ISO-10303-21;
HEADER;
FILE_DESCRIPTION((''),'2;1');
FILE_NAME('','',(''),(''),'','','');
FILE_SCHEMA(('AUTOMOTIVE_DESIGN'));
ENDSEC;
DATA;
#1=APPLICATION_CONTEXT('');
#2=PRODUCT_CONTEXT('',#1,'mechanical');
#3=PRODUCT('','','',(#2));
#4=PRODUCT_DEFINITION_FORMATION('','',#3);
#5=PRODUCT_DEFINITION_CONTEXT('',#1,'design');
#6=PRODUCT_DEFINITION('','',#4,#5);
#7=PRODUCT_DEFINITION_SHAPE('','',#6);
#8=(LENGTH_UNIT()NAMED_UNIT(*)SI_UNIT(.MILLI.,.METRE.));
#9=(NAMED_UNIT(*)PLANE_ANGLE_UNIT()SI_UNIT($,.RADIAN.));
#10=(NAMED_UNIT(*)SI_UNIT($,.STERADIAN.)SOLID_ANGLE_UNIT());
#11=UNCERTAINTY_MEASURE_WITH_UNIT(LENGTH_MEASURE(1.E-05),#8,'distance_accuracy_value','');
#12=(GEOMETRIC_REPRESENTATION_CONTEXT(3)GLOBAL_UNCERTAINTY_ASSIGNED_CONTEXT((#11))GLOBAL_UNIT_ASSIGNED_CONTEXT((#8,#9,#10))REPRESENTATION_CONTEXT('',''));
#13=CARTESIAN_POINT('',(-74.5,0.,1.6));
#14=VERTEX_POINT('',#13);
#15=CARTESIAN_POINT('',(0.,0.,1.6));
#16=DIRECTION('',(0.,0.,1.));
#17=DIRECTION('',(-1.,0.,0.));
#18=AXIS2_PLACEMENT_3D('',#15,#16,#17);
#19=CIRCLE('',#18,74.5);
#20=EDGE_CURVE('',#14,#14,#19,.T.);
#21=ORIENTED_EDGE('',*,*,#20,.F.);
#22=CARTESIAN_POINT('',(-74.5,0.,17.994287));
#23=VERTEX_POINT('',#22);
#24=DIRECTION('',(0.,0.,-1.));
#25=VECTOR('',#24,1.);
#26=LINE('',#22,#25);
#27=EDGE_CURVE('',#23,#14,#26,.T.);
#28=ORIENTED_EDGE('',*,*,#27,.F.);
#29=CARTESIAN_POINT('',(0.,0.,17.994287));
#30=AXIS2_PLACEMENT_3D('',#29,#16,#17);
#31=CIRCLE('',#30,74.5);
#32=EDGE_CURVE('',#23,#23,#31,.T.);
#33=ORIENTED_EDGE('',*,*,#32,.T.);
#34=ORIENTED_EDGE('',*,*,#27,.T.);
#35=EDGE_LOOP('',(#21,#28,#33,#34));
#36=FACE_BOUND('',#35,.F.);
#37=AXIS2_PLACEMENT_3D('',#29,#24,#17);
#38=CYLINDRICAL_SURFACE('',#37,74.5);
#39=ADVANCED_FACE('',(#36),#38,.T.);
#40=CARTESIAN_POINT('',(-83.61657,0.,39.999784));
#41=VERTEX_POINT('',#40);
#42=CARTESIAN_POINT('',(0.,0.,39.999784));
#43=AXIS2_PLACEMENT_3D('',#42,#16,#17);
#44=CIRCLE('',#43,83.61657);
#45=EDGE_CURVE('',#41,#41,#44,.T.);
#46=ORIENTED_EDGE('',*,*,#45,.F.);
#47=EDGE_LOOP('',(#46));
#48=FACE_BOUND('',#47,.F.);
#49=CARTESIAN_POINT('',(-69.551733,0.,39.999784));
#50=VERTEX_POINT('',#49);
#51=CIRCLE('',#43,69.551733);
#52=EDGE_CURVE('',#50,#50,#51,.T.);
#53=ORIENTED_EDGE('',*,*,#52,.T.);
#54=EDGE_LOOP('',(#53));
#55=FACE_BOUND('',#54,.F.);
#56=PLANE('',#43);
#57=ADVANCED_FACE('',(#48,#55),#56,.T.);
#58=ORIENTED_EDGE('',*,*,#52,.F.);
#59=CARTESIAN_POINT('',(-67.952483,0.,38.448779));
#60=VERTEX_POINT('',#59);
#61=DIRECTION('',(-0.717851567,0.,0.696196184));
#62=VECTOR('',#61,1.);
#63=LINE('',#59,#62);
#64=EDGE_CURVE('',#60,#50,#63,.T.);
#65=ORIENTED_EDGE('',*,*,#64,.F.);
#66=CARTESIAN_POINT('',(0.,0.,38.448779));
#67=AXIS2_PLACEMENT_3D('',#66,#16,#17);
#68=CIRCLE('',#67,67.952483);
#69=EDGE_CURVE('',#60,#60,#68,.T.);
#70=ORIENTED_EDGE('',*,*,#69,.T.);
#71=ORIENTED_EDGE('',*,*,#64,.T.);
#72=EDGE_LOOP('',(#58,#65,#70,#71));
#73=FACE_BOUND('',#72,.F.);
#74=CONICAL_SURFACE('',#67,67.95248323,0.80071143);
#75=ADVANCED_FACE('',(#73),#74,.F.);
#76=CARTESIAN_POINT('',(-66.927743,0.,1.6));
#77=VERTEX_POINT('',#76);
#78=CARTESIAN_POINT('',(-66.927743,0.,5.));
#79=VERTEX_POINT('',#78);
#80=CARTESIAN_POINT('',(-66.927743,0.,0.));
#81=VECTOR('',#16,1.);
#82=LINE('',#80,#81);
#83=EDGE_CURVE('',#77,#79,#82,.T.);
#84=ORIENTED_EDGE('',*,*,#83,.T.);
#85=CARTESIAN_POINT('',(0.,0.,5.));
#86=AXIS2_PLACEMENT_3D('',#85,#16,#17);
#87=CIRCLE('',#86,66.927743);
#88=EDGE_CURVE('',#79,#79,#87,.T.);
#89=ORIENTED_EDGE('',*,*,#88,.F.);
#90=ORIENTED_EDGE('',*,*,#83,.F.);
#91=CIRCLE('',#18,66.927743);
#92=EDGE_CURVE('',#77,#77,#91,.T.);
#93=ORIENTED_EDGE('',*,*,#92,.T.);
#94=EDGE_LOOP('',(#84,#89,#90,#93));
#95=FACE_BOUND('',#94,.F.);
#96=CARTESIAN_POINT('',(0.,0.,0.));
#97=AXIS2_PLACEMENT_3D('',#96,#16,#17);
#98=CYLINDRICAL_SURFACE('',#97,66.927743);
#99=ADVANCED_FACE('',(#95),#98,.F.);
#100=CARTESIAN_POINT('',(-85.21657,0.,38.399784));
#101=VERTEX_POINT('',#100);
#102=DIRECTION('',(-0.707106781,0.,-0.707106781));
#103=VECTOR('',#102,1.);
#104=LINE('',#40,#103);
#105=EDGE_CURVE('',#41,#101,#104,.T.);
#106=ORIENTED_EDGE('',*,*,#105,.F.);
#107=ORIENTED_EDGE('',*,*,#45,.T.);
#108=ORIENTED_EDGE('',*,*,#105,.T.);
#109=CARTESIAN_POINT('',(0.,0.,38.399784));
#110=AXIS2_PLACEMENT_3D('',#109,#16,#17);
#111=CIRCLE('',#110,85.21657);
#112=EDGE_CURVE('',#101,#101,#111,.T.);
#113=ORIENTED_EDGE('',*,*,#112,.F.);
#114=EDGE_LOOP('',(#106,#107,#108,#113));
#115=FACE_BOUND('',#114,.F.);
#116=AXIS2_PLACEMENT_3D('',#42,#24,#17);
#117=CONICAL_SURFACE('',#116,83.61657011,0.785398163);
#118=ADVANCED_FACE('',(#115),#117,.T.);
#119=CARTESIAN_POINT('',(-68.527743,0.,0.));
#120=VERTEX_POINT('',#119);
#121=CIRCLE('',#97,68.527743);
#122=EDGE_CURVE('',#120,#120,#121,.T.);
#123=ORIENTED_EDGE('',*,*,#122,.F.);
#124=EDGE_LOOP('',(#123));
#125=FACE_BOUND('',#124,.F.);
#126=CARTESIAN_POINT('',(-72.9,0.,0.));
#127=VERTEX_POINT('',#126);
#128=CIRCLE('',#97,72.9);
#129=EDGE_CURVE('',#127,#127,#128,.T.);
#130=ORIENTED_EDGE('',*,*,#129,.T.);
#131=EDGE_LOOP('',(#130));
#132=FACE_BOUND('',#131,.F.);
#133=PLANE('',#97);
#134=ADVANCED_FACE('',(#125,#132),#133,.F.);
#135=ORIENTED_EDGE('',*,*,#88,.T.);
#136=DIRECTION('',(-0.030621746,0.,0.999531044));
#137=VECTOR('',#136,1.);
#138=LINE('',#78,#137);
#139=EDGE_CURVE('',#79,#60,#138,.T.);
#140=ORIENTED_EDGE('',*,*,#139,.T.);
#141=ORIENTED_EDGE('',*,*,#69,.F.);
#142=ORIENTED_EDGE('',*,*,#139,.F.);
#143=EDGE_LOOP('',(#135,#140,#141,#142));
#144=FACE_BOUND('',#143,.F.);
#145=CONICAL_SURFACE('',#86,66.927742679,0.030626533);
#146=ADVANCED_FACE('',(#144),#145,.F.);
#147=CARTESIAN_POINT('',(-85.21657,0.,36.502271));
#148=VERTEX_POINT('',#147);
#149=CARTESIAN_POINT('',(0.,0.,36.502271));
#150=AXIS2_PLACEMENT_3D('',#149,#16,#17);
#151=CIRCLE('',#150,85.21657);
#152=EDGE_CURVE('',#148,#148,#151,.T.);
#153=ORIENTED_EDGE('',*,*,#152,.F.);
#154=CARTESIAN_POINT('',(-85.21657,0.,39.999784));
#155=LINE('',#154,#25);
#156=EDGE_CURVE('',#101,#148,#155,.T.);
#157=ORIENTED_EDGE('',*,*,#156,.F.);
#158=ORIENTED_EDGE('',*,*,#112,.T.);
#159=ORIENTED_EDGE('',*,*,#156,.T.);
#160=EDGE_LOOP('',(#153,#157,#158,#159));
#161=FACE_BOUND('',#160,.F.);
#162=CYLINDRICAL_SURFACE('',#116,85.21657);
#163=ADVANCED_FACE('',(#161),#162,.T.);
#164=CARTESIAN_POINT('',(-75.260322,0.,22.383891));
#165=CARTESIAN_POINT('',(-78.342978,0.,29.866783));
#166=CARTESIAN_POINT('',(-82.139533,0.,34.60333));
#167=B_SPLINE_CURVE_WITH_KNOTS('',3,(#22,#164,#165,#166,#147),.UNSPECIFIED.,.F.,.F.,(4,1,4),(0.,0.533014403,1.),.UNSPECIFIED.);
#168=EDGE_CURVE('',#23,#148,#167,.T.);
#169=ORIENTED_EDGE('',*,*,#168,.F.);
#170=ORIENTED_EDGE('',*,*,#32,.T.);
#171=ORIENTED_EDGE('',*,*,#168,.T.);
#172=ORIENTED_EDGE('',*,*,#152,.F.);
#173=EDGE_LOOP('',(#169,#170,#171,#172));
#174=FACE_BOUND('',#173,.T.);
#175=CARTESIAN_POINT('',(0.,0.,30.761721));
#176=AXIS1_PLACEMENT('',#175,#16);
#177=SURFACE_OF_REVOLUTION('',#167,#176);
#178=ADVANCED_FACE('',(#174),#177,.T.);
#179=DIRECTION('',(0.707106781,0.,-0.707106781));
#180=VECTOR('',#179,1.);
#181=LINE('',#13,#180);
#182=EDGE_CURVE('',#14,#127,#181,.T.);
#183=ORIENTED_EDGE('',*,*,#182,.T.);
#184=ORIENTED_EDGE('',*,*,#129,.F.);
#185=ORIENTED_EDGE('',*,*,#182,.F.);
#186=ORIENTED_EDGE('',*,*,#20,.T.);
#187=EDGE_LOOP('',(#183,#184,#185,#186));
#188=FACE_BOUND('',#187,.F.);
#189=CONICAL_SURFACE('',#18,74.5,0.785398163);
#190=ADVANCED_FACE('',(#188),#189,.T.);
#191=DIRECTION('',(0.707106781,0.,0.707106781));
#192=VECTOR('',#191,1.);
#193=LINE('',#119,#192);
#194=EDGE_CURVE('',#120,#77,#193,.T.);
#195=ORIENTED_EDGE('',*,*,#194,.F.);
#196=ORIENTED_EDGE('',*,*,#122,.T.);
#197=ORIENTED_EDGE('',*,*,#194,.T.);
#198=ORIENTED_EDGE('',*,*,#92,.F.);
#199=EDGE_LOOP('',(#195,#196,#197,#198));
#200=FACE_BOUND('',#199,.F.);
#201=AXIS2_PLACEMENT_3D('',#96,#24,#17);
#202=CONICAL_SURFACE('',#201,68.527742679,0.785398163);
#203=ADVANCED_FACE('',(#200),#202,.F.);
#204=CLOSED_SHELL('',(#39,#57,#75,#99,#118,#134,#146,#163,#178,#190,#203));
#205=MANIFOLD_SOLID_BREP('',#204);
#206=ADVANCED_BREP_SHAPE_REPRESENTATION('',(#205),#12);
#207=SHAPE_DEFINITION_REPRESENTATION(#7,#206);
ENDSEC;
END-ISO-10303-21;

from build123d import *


# Not quite as in the source:
# - a fillet or chamfer that OpenCascade refuses, or shapes differently, is made with other operations: its cross-section is extruded or revolved along the edge and cut away or added


with BuildPart() as f1:
    # F0 (on Front) → F1 (revolve)
    with BuildSketch(Plane.XZ):
        with BuildLine():
            Line((-74.5, 17.9942867992), (-74.5, 0))
            Line((-74.5, 0), (-67, 0))
            Line((-67, 0), (-66.9277426788, 0))
            Line((-66.9277426788, 0), (-66.9277426788, 5))
            Line((-66.9277426788, 5), (-68, 39.9997837721))
            Line((-68, 39.9997837721), (-85.2165701103, 39.9997837721))
            Line((-85.2165701103, 39.9997837721), (-85.2165701103, 36.5022708525))
            add(Edge.make_bspline(
                [(-74.5, 17.9942867992), (-75.2603216112, 22.383891166), (-78.3429778204, 29.8667831773), (-82.1395330633, 34.6033302524), (-85.2165701103, 36.5022708525)],
                knots=[0, 0, 0, 0, 0.533014403, 1, 1, 1, 1], degree=3))
        make_face()
    revolve(axis=Axis((0, 0, 30.7617206126), (0, 0, 1)))

    # F2: chamfer of 1.6 on 4 edges, made by hand

    # F2_s1 → F2_t2 (revolve, cut)
    with BuildSketch(Plane.XZ):
        Polygon((-74.5, 1.6), (-72.9, 0), (-74.5, 0), align=None)
    revolve(axis=Axis((0, 0, 0), (0, 0, 1)), mode=Mode.SUBTRACT)

    # F2_s3 → F2_t4 (revolve, cut)
    with BuildSketch(Plane.XZ):
        Polygon((-68.5277426788, 0), (-66.9277426788, 1.6), (-66.9277426788, 0), align=None)
    revolve(axis=Axis((0, 0, 0), (0, 0, 1)), mode=Mode.SUBTRACT)

    # F2_s5 → F2_t6 (revolve, cut)
    with BuildSketch(Plane.XZ):
        Polygon((-67.9524832296, 38.4487785653), (-69.5517329007, 39.9997837721), (-68, 39.9997837721), align=None)
    revolve(axis=Axis((0, 0, 39.9997837721), (0, 0, 1)), mode=Mode.SUBTRACT)

    # F2_s7 → F2_t8 (revolve, cut)
    with BuildSketch(Plane.XZ):
        Polygon((-83.6165701103, 39.9997837721), (-85.2165701103, 38.3997837721), (-85.2165701103, 39.9997837721), align=None)
    revolve(axis=Axis((0, 0, 39.9997837721), (0, 0, 1)), mode=Mode.SUBTRACT)


solid = f1.part
